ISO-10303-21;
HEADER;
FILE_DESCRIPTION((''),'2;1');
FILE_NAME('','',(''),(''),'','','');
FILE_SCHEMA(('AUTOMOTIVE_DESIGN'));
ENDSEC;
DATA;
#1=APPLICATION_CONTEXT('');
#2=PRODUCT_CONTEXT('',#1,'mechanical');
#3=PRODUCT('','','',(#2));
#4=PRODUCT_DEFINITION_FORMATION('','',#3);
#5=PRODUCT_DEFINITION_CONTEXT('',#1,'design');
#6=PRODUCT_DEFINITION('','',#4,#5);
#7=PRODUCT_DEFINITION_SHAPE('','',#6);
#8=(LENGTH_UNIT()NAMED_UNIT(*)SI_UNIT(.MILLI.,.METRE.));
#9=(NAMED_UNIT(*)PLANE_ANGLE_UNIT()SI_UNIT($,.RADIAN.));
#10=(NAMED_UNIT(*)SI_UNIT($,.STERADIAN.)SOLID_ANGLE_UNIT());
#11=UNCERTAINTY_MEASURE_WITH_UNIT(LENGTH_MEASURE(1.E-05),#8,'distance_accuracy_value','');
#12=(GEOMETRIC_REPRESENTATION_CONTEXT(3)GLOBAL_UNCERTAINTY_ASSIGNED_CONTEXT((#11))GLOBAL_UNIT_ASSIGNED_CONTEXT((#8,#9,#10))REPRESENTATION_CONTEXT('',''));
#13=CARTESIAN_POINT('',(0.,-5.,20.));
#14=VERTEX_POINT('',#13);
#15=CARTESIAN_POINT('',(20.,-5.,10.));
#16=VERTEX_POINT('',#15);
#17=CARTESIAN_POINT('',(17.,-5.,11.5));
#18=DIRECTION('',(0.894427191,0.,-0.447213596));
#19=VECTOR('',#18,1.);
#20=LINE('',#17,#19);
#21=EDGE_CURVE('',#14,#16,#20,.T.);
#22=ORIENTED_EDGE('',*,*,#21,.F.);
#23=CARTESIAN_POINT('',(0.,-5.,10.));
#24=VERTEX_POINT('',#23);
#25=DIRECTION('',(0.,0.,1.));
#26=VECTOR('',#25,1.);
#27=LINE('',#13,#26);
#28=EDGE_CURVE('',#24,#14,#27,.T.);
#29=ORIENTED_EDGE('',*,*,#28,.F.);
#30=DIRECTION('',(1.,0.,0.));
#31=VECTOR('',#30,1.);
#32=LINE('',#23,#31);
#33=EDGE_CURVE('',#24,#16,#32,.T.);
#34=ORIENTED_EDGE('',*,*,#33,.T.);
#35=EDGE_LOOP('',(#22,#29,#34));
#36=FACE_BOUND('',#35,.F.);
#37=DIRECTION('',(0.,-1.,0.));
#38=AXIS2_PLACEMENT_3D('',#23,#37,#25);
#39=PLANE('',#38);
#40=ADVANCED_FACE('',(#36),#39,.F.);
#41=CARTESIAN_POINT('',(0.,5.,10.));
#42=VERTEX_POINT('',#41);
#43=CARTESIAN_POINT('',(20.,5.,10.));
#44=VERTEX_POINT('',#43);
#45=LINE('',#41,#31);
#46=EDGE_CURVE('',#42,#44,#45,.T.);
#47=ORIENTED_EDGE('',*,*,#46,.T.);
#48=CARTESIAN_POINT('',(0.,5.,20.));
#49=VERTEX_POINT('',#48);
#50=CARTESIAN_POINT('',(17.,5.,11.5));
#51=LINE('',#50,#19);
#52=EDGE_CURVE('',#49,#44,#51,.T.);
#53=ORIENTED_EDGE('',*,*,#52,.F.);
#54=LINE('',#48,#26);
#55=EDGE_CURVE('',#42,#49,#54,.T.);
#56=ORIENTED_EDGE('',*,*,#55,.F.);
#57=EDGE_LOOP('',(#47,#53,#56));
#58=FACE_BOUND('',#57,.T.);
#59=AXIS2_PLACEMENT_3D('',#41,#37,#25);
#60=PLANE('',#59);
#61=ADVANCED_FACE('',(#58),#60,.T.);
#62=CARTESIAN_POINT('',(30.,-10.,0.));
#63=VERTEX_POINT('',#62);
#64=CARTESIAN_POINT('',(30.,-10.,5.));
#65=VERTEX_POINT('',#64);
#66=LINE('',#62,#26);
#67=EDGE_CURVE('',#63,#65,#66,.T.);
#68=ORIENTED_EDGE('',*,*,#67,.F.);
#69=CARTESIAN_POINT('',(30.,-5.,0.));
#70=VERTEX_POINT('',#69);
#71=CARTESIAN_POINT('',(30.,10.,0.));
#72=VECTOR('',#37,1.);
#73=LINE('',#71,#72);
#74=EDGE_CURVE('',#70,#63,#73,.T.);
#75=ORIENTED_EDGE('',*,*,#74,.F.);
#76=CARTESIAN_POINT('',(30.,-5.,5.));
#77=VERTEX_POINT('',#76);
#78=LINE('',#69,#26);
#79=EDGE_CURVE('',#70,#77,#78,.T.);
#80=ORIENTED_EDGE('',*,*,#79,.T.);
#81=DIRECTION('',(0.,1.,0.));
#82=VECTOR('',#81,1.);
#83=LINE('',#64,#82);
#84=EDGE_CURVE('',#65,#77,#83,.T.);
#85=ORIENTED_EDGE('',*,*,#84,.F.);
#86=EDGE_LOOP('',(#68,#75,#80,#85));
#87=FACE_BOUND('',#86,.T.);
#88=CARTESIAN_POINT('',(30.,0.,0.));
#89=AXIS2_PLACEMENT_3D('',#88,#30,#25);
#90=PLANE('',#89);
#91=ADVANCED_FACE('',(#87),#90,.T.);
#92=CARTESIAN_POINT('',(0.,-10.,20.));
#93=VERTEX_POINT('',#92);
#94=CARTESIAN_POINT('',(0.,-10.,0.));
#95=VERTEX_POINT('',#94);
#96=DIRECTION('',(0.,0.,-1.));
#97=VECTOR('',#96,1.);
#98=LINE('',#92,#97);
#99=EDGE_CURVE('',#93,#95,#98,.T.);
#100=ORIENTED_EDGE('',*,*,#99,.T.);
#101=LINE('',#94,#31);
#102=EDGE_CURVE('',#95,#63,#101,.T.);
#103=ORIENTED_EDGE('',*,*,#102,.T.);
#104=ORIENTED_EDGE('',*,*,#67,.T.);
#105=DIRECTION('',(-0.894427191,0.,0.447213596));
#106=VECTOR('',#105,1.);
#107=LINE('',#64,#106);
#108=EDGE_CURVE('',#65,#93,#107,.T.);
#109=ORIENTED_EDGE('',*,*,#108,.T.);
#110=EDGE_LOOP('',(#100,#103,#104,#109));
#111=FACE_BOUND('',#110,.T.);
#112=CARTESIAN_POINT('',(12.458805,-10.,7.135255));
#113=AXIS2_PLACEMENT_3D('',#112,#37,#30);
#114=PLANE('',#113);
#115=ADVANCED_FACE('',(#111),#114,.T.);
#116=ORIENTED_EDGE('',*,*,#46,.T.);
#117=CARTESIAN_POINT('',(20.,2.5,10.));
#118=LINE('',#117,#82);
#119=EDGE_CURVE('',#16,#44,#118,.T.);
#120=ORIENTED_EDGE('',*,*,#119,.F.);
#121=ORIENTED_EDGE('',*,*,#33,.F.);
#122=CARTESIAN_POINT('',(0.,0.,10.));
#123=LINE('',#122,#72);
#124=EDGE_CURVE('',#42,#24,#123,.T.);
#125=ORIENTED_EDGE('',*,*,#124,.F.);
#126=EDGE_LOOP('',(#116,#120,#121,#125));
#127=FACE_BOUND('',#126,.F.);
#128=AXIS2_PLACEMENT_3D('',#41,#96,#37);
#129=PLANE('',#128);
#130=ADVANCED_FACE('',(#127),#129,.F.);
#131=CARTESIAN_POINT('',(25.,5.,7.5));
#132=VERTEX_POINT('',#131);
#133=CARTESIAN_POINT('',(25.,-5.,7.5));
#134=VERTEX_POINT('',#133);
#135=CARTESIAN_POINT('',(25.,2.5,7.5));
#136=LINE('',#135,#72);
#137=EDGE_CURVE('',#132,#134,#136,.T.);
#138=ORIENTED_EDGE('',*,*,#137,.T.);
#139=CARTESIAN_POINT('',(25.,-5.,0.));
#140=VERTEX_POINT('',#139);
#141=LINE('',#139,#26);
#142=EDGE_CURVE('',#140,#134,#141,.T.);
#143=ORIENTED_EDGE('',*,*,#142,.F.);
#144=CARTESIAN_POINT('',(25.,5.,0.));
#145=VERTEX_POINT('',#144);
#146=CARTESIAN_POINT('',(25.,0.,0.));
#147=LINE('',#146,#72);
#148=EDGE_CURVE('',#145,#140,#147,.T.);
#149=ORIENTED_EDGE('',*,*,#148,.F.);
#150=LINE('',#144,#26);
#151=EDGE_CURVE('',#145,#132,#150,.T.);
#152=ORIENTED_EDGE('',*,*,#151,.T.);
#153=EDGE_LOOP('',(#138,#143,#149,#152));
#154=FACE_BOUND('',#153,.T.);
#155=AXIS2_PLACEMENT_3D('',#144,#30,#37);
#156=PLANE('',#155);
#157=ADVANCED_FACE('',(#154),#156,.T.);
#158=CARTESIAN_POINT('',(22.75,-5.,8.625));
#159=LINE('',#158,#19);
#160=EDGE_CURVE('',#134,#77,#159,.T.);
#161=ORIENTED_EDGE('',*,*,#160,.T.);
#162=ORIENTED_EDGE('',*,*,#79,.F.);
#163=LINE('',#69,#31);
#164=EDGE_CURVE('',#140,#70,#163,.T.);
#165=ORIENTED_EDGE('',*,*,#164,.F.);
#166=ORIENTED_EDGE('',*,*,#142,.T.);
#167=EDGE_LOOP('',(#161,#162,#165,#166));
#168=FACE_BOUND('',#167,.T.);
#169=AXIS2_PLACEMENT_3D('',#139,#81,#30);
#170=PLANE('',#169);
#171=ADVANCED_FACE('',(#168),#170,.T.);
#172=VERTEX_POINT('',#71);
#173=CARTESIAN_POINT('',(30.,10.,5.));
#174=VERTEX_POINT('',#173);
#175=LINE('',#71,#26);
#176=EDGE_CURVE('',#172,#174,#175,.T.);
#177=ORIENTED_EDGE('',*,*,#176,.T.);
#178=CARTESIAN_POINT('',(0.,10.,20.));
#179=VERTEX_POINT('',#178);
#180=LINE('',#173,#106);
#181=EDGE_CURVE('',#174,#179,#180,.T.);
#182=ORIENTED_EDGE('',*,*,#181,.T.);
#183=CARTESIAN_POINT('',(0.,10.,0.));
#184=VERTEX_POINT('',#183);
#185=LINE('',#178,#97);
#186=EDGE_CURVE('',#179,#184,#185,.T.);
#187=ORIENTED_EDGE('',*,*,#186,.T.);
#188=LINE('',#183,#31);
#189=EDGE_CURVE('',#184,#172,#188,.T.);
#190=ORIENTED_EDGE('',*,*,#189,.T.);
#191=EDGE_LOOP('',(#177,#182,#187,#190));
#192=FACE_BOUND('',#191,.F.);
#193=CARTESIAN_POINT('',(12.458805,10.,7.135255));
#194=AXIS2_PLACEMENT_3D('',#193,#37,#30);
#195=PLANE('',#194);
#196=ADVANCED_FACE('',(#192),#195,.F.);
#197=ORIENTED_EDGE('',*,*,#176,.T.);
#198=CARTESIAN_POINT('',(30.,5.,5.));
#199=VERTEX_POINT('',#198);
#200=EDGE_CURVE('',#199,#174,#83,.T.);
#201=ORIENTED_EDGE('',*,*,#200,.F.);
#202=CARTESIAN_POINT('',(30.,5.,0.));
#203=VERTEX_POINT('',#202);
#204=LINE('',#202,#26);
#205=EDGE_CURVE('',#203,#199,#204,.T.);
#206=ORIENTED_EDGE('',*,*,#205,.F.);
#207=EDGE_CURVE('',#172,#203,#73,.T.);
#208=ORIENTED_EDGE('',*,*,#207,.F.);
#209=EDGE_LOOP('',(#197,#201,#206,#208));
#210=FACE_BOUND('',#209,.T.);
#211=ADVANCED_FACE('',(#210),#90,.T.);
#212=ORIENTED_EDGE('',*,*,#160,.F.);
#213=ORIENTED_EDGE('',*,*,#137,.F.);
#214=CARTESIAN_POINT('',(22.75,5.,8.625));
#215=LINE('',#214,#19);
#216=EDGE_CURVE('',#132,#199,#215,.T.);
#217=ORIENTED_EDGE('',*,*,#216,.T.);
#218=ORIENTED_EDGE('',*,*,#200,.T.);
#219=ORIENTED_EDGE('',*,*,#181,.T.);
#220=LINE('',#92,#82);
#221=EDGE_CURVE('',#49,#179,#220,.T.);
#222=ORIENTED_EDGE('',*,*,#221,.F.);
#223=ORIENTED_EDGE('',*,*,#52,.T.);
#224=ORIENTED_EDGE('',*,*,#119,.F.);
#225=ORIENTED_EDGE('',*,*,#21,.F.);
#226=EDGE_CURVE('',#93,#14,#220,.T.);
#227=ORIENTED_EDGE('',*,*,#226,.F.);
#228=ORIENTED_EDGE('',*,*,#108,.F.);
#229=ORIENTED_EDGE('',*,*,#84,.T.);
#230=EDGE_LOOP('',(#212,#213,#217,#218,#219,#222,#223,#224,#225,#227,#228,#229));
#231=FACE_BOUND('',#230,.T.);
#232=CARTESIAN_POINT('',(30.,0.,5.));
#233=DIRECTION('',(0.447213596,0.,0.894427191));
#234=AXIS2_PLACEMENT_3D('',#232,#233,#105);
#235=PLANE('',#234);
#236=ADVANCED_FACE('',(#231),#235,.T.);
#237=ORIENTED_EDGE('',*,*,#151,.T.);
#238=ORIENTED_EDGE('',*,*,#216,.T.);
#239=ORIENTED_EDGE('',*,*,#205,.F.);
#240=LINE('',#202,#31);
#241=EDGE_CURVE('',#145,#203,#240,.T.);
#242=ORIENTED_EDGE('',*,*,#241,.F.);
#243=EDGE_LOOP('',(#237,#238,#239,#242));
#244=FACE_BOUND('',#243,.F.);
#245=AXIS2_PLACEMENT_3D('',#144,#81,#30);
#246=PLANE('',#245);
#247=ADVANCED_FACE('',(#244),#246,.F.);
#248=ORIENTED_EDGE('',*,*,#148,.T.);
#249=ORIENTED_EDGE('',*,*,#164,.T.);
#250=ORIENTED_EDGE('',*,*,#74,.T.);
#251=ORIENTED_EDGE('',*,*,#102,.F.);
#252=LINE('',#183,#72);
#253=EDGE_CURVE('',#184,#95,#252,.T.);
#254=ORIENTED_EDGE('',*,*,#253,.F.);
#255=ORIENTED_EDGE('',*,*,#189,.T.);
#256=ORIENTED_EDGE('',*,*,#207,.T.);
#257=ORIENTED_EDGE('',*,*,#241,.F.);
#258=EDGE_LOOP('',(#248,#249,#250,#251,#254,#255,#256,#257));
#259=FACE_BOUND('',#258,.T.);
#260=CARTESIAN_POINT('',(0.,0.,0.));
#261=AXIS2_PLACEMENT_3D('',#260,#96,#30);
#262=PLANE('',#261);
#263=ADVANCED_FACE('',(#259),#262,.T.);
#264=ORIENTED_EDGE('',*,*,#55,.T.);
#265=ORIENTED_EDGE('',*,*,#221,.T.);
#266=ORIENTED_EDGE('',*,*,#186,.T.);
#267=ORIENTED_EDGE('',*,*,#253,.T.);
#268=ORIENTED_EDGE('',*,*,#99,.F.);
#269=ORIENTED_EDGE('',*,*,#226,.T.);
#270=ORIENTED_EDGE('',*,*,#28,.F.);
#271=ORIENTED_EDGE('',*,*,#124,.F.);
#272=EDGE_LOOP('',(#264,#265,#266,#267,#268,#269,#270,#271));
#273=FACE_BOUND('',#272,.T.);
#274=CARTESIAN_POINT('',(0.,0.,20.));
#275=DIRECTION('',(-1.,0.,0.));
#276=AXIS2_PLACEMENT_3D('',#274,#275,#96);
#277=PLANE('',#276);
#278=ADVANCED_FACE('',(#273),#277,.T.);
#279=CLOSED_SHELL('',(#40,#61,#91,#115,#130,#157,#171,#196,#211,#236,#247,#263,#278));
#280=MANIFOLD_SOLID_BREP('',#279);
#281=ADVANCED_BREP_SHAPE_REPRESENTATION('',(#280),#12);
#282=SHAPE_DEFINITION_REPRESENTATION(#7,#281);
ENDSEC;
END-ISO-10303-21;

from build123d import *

# Parameters (mm, degrees)
F1_DEPTH = 10
F2_W     = 10
F2_H     = 20
F3_DEPTH = 56
F4_W     = 10
F4_H     = 10
F5_REACH = 34.1431356237


# Not quite as in the source:
# - an extrude ends at something that could not be found from the text; its depth is read off the source's solid


with BuildPart() as f1:
    # F0 (on Front) → F1 (new body, symmetric)
    with BuildSketch(Plane.XZ):
        Polygon((0, 20), (0, 0), (30, 0), (30, 5), align=None)
    extrude(amount=F1_DEPTH, both=True)

    # F2 (on face) → F3 (cut, through all)
    with BuildSketch(Plane(origin=(0, 0, 0), x_dir=(0, -1, 0), z_dir=(-1, 0, 0))):
        with Locations((0, 20)):
            Rectangle(F2_W, F2_H)
    extrude(amount=-F3_DEPTH, mode=Mode.SUBTRACT)

    f5_end = Plane(origin=(17.5, 0, 11.25), x_dir=(0.894427191, 0, -0.4472135955), z_dir=(0.4472135955, 0, 0.894427191))
    # F4 (on face) → F5 (cut, up to a plane its end follows)
    with BuildSketch(Plane(origin=(0, 0, 0), x_dir=(1, 0, 0), z_dir=(0, 0, -1))):
        with Locations((30, 0)):
            Rectangle(F4_W, F4_H)
    f5_long = extrude(amount=-F5_REACH, mode=Mode.PRIVATE)
    add(split(f5_long, bisect_by=f5_end, keep=Keep.BOTTOM, mode=Mode.PRIVATE), mode=Mode.SUBTRACT)


solid = f1.part
